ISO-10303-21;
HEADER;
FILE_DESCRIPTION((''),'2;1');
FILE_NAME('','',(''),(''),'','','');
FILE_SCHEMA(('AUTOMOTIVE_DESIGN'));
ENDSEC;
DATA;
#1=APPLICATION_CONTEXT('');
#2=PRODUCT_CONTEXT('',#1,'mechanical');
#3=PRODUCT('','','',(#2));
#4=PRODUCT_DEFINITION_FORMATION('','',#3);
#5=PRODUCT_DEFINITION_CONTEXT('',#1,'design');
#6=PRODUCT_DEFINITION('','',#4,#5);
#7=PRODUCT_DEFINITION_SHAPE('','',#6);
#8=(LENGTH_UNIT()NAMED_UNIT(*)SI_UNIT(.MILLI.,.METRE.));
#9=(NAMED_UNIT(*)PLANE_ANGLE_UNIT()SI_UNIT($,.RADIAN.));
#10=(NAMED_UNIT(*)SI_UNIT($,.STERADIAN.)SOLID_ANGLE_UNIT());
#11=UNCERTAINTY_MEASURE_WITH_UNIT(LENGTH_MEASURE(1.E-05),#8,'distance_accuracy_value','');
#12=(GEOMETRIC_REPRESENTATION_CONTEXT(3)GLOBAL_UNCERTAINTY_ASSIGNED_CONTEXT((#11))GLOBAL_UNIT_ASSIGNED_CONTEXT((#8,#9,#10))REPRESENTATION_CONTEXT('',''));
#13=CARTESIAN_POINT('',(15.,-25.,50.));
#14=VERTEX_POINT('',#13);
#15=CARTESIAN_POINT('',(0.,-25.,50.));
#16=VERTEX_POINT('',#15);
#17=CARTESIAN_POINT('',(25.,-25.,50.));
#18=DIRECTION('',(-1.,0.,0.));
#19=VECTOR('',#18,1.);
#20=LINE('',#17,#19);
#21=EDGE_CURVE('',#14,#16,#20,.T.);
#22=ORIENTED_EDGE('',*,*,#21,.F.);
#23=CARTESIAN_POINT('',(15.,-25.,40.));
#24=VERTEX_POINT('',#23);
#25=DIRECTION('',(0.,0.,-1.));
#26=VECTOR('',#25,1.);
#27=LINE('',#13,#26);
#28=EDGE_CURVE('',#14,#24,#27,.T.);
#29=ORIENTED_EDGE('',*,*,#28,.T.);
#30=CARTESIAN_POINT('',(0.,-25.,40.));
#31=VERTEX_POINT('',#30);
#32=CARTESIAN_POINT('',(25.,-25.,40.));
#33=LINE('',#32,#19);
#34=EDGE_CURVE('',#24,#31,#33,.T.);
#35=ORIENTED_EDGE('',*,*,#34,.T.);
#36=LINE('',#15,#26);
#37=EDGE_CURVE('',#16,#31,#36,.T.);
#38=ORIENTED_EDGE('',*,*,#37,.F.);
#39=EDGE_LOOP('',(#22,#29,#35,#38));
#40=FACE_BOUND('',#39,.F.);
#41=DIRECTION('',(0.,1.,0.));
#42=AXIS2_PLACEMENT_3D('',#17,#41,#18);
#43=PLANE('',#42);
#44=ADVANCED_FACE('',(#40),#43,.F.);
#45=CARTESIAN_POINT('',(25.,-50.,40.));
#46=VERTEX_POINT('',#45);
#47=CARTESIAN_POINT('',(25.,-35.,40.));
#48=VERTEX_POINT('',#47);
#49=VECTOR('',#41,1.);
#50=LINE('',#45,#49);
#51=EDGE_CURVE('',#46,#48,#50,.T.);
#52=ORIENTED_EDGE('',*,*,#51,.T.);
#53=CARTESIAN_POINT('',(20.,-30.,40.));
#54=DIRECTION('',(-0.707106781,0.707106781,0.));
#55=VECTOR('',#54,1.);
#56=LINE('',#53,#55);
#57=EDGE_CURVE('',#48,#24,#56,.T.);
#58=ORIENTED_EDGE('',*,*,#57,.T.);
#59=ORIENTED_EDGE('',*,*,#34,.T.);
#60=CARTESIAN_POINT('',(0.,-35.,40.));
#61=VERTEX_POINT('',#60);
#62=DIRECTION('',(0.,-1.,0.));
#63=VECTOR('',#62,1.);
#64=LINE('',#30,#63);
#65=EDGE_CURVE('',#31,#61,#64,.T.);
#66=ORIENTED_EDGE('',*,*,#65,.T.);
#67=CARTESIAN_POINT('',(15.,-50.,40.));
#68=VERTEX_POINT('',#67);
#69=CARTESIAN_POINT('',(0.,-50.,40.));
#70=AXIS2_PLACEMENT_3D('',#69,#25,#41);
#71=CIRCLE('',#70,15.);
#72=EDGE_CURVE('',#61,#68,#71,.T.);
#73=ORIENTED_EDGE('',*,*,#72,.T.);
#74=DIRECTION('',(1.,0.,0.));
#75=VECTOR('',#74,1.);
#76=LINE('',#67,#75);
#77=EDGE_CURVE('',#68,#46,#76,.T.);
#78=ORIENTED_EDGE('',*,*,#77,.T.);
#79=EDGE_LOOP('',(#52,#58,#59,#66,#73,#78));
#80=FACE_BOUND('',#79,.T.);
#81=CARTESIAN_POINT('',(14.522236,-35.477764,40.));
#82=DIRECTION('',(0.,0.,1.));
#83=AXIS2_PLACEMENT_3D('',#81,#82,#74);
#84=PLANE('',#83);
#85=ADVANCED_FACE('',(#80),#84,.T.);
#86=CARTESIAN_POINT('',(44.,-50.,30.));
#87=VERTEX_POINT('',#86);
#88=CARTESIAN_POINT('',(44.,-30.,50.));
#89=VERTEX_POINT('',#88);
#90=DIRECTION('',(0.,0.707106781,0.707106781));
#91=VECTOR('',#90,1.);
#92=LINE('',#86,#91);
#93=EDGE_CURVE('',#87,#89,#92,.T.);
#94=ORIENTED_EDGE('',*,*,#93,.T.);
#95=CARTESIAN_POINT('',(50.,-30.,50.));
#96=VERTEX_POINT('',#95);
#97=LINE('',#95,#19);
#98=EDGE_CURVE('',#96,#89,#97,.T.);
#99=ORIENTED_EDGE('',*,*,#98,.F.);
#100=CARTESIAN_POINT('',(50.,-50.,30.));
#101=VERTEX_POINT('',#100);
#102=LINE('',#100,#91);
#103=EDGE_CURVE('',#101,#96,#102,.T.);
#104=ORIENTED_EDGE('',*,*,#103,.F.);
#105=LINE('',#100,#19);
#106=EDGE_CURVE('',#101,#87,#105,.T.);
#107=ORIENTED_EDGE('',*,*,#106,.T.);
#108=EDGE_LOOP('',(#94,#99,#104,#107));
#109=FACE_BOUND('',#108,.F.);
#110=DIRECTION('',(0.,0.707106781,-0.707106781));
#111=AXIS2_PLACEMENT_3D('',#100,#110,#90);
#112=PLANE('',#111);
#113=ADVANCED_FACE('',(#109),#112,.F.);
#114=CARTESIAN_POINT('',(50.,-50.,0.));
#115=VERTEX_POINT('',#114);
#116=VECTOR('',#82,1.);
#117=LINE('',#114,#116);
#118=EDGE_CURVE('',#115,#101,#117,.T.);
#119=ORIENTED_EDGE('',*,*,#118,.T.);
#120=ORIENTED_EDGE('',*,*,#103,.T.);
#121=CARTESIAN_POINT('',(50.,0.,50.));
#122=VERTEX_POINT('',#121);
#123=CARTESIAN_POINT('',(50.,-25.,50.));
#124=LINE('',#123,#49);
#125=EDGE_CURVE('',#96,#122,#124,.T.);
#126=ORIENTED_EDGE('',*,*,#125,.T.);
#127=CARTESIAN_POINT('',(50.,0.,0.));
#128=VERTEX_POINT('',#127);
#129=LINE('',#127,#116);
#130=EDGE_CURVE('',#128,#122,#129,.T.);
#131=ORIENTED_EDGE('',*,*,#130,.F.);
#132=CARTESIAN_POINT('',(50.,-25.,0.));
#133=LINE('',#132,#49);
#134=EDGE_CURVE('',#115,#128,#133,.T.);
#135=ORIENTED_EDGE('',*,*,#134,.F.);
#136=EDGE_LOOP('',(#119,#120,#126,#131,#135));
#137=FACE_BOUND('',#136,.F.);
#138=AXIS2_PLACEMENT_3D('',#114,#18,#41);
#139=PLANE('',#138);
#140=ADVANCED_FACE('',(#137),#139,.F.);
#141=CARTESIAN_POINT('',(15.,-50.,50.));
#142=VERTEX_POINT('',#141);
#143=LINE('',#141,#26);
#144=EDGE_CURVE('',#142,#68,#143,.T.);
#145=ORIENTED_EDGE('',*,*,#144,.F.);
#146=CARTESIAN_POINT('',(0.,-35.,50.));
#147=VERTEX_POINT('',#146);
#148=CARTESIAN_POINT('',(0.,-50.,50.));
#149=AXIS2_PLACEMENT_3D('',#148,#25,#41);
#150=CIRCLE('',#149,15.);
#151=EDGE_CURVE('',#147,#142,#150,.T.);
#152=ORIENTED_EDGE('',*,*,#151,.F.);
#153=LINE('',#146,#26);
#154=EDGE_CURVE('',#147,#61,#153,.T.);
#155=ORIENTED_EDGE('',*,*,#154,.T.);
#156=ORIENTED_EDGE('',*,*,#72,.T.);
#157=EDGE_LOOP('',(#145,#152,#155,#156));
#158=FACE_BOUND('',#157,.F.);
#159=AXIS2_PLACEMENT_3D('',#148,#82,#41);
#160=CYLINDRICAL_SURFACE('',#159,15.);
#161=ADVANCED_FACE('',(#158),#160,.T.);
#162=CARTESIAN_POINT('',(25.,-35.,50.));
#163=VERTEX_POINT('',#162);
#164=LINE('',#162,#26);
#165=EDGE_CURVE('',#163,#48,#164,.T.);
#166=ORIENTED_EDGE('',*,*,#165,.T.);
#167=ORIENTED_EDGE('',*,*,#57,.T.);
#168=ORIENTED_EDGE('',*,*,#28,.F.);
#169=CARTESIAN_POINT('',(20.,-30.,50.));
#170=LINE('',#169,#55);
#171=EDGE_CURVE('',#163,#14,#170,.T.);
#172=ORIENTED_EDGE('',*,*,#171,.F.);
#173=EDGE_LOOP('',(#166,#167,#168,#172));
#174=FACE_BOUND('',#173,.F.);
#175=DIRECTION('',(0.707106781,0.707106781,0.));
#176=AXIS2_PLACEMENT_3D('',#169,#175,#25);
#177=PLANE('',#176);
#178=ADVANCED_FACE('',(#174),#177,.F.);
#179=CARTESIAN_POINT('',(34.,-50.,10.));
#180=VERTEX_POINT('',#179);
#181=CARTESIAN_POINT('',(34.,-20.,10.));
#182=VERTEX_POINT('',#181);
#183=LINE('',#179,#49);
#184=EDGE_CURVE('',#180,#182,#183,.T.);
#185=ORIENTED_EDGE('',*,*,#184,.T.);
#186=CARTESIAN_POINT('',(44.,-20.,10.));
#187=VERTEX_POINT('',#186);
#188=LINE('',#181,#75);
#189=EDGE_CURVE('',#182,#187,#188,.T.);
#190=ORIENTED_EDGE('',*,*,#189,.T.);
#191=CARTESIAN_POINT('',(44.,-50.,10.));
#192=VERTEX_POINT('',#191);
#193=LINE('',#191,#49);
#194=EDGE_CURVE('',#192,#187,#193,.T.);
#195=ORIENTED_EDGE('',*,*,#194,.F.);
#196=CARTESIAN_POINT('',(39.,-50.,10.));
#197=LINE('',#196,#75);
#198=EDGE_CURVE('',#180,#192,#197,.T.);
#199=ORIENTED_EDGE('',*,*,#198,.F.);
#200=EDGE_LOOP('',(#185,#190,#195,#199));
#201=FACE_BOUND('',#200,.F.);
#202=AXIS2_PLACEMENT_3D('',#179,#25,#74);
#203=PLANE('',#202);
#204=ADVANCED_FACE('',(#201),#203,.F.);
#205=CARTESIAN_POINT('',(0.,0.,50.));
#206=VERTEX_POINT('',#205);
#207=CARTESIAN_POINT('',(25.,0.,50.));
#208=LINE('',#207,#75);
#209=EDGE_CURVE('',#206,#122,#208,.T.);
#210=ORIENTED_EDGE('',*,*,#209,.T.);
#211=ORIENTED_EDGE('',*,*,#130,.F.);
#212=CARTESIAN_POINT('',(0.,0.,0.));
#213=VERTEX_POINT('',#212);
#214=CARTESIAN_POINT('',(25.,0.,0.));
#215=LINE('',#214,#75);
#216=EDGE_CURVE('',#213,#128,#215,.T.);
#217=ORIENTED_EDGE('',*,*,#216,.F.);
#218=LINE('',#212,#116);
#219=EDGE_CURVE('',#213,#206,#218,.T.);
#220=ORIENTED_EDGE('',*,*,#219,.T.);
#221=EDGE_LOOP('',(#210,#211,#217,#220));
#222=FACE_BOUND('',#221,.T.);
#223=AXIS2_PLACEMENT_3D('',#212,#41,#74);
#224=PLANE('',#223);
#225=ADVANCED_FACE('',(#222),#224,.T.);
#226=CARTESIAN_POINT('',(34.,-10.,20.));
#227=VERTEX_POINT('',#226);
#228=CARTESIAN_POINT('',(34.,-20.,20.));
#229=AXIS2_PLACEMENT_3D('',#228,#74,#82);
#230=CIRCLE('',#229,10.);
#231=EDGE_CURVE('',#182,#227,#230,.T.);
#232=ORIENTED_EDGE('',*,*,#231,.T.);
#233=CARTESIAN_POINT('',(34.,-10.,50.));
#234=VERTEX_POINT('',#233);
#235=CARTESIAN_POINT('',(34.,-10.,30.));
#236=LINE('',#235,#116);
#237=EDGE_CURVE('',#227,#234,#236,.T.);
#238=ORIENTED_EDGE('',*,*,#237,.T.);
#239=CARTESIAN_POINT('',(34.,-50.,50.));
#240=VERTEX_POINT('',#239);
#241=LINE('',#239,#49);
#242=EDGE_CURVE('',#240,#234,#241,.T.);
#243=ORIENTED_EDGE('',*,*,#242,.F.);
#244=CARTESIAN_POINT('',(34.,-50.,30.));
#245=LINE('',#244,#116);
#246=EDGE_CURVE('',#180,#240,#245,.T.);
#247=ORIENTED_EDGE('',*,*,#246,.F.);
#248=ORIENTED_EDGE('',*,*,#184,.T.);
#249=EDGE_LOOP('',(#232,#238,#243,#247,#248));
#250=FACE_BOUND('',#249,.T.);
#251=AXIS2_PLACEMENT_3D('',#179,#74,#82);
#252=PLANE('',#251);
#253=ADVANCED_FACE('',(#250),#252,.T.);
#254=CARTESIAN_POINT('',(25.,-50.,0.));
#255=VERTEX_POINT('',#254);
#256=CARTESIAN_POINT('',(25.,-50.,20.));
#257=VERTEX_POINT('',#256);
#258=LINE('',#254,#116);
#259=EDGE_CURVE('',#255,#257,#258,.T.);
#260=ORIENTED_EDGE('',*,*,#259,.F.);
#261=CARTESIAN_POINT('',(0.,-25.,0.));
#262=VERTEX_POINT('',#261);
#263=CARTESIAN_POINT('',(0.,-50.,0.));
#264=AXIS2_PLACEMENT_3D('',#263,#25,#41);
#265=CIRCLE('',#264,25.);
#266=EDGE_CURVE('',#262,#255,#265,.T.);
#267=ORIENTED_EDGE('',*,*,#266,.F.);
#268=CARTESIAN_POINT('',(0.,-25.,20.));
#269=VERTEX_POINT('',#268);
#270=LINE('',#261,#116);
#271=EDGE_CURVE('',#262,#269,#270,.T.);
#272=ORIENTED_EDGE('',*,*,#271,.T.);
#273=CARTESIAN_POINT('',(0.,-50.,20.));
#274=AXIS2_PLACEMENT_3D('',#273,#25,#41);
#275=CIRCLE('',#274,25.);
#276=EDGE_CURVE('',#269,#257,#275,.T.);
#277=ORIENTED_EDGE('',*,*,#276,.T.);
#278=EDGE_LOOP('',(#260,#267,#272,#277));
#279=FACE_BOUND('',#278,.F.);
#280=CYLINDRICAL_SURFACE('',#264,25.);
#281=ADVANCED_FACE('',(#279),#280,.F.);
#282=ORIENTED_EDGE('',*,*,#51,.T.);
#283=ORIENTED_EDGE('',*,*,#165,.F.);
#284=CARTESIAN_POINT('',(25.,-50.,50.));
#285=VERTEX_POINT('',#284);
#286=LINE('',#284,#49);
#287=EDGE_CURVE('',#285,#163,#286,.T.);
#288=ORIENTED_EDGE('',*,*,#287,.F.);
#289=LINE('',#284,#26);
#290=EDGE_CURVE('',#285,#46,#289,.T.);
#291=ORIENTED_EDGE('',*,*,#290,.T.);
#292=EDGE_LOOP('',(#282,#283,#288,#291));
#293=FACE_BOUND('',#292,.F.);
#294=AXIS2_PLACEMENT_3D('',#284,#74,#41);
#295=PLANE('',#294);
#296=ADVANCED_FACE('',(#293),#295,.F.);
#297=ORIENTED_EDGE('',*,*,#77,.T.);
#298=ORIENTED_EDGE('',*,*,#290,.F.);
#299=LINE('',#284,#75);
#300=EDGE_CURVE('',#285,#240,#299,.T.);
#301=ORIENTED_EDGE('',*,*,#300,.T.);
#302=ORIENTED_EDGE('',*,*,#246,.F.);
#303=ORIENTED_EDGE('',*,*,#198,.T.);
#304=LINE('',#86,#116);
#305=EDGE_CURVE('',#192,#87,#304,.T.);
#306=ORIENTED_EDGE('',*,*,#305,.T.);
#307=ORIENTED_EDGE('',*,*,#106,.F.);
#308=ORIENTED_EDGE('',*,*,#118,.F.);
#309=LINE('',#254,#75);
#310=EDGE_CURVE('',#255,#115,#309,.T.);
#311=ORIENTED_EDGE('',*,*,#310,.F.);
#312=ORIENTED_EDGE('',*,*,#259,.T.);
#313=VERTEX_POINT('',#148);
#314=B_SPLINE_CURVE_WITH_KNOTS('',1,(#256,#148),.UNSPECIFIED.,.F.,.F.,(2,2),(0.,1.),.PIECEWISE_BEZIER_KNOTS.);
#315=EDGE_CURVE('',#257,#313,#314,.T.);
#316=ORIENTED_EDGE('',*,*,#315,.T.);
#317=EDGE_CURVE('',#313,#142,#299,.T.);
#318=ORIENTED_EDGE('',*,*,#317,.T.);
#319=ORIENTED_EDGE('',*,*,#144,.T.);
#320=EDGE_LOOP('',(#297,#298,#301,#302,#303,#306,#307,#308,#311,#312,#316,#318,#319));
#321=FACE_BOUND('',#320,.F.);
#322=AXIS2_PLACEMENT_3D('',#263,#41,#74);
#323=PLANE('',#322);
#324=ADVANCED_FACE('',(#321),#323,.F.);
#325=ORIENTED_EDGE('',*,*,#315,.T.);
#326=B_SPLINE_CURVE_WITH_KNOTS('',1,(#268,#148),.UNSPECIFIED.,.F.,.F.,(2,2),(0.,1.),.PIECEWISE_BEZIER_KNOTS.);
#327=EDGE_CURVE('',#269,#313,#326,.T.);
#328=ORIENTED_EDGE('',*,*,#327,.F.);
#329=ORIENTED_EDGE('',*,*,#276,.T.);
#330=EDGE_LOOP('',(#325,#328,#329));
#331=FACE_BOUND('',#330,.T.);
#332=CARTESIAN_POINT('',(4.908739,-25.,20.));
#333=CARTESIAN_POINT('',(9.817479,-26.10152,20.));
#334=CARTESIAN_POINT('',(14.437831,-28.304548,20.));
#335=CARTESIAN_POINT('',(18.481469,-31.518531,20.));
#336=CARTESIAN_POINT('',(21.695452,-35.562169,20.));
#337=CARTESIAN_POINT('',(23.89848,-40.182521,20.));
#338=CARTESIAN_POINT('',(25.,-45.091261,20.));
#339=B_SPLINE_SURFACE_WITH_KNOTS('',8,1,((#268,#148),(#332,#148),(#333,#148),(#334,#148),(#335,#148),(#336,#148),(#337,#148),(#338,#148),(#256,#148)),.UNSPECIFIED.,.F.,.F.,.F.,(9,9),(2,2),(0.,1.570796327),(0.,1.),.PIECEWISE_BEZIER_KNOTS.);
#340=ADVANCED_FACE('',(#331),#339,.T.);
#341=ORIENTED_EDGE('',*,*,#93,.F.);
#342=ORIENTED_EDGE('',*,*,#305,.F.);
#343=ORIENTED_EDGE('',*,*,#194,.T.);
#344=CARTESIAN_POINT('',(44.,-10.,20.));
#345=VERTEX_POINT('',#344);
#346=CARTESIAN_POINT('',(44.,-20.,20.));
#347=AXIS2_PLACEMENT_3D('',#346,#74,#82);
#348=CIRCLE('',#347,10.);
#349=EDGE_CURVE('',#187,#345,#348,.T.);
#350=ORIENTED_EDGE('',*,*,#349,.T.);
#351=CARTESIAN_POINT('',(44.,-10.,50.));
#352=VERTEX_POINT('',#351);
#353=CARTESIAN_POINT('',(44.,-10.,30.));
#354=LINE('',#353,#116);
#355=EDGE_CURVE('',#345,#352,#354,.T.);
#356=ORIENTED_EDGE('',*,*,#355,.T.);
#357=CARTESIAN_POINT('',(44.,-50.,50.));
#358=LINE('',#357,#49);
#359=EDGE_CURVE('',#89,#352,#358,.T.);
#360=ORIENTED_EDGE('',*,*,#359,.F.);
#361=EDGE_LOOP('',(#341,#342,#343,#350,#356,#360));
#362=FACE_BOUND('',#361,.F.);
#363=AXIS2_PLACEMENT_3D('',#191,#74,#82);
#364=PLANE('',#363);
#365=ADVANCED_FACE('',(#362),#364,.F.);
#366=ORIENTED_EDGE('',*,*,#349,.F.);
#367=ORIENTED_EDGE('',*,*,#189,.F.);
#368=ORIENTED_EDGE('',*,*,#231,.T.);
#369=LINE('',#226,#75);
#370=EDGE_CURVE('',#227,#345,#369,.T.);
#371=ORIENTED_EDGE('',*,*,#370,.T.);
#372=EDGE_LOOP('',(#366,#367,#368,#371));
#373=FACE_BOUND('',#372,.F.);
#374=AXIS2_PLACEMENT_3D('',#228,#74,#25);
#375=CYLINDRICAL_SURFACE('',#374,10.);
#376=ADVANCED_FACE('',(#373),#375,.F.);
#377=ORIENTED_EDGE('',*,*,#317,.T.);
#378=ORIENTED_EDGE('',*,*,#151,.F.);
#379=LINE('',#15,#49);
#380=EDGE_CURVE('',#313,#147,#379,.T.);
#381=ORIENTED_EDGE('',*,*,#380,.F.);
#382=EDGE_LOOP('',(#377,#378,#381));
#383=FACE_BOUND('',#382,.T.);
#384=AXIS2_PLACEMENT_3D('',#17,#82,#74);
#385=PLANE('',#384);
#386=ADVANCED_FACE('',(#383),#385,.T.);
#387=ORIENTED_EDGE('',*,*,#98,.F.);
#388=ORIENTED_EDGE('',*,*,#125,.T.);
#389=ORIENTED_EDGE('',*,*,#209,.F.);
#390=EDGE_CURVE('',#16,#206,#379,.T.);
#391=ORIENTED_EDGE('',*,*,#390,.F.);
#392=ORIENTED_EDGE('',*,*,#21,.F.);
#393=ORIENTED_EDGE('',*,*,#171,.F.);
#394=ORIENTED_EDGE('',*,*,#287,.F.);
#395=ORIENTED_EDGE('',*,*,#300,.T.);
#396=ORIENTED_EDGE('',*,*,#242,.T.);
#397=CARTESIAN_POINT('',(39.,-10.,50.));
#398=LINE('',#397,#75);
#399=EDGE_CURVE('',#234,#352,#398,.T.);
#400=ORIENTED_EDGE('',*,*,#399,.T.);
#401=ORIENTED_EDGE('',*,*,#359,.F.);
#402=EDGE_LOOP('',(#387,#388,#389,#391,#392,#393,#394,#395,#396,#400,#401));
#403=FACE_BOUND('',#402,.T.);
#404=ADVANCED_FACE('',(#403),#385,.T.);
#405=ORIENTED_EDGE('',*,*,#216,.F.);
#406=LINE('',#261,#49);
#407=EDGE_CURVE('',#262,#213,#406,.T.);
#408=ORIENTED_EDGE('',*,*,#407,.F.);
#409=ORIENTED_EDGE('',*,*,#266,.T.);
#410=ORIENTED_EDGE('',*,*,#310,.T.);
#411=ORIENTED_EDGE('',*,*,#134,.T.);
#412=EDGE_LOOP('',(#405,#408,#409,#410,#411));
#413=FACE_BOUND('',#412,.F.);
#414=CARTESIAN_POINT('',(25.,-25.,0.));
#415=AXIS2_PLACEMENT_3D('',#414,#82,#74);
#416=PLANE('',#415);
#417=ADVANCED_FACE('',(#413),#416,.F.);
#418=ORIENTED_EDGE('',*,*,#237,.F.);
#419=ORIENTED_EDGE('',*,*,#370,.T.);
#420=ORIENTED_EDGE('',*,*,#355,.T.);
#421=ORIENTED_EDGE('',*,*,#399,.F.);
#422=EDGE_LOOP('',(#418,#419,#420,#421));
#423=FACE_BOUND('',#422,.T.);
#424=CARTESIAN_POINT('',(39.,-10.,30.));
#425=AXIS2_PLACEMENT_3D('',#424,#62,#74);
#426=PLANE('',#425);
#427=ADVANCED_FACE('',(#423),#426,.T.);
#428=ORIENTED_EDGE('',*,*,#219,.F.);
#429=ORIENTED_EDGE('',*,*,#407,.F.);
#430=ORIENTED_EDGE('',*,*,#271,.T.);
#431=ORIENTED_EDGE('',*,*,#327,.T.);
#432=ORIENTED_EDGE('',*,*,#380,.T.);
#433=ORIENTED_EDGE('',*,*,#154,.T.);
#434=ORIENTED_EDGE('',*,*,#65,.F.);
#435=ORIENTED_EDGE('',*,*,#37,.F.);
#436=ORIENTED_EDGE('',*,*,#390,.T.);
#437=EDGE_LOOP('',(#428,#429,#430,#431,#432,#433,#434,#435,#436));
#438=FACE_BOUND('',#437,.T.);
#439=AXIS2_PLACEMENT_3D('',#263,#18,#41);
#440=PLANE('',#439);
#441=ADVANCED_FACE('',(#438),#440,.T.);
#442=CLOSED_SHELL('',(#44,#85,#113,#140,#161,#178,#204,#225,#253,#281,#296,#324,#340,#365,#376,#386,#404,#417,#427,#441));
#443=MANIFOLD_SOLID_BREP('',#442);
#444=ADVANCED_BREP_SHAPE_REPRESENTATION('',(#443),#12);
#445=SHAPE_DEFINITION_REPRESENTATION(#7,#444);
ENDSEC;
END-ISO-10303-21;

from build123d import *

# Parameters (mm, degrees)
F0_W      = 50
F0_H      = 50
F1_DEPTH  = 50
F3_DEPTH  = 6
F4_W      = 10
F4_H      = 40
F5_DEPTH  = 40
F6_R      = 10
F8_DEPTH  = 10
F9_SIZE   = 10
F11_DEPTH = 20
F12_DEPTH = 20


# Not quite as in the source:
# - a feature names something its author has since deleted; it is built from what else it names


with BuildPart() as f1:
    # F0 (on Top) → F1 (new body)
    with BuildSketch(Plane.XY):
        with Locations((25, -25)):
            Rectangle(F0_W, F0_H)
    extrude(amount=F1_DEPTH)

    # F2 (on face) → F3 (cut)
    with BuildSketch(Plane.YZ.offset(50)):
        Polygon((-30, 50), (-50, 50), (-50, 30), align=None)
    extrude(amount=-F3_DEPTH, mode=Mode.SUBTRACT)

    # F4 (on face) → F5 (cut)
    with BuildSketch(Plane.XZ.offset(50)):
        with Locations((39, 30)):
            Rectangle(F4_W, F4_H)
    extrude(amount=-F5_DEPTH, mode=Mode.SUBTRACT)

    # F6
    f6_edges = [f1.edges().sort_by_distance(p)[0] for p in [
        (39, -10, 10),
    ]]
    fillet(f6_edges, radius=F6_R)

    # F7 (on face) → F8 (cut)
    with BuildSketch(Plane.XY.offset(50)):
        with BuildLine():
            Line((0, -25), (0, -35))
            ThreePointArc((0, -35), (10.6066017178, -39.3933982822), (15, -50))
            Line((15, -50), (25, -50))
            Line((25, -50), (25, -25))
            Line((25, -25), (0, -25))
        make_face()
    extrude(amount=-F8_DEPTH, mode=Mode.SUBTRACT)

    # F9
    f9_edges = [f1.edges().sort_by_distance(p)[0] for p in [
        (25, -25, 45),
    ]]
    chamfer(f9_edges, length=F9_SIZE)

    # F10 (on face) → F11 (cut)
    with BuildSketch(Plane(origin=(0, 0, 0), x_dir=(1, 0, 0), z_dir=(0, 0, -1))):
        with BuildLine():
            Line((25, 50), (0, 50))
            Line((0, 50), (0, 25))
            ThreePointArc((0, 25), (17.6776695297, 32.3223304703), (25, 50))
        make_face()
    extrude(amount=-F11_DEPTH, mode=Mode.SUBTRACT)

    # F10 (on face) → F12 (cut)
    with BuildSketch(Plane(origin=(0, 0, 0), x_dir=(1, 0, 0), z_dir=(0, 0, -1))):
        with BuildLine():
            Line((25, 50), (0, 50))
            Line((0, 50), (0, 25))
            ThreePointArc((0, 25), (17.6776695297, 32.3223304703), (25, 50))
        make_face()
    extrude(amount=-F12_DEPTH, mode=Mode.SUBTRACT)

    # F11_face (on face) → F14 section 0
    with BuildSketch(Plane(origin=(10.6103295395, -39.3896704605, 20), x_dir=(1, 0, 0), z_dir=(0, 0, -1)), mode=Mode.PRIVATE) as f14_s0:
        with BuildLine():
            Line((14.3896704605, 10.6103295395), (-10.6103295395, 10.6103295395))
            Line((-10.6103295395, 10.6103295395), (-10.6103295395, -14.3896704605))
            ThreePointArc((-10.6103295395, -14.3896704605), (7.0673399902, -7.0673399902), (14.3896704605, 10.6103295395))
        make_face()
    loft([f14_s0.sketch, Vertex(0, -50, 50)], mode=Mode.SUBTRACT)


solid = f1.part
